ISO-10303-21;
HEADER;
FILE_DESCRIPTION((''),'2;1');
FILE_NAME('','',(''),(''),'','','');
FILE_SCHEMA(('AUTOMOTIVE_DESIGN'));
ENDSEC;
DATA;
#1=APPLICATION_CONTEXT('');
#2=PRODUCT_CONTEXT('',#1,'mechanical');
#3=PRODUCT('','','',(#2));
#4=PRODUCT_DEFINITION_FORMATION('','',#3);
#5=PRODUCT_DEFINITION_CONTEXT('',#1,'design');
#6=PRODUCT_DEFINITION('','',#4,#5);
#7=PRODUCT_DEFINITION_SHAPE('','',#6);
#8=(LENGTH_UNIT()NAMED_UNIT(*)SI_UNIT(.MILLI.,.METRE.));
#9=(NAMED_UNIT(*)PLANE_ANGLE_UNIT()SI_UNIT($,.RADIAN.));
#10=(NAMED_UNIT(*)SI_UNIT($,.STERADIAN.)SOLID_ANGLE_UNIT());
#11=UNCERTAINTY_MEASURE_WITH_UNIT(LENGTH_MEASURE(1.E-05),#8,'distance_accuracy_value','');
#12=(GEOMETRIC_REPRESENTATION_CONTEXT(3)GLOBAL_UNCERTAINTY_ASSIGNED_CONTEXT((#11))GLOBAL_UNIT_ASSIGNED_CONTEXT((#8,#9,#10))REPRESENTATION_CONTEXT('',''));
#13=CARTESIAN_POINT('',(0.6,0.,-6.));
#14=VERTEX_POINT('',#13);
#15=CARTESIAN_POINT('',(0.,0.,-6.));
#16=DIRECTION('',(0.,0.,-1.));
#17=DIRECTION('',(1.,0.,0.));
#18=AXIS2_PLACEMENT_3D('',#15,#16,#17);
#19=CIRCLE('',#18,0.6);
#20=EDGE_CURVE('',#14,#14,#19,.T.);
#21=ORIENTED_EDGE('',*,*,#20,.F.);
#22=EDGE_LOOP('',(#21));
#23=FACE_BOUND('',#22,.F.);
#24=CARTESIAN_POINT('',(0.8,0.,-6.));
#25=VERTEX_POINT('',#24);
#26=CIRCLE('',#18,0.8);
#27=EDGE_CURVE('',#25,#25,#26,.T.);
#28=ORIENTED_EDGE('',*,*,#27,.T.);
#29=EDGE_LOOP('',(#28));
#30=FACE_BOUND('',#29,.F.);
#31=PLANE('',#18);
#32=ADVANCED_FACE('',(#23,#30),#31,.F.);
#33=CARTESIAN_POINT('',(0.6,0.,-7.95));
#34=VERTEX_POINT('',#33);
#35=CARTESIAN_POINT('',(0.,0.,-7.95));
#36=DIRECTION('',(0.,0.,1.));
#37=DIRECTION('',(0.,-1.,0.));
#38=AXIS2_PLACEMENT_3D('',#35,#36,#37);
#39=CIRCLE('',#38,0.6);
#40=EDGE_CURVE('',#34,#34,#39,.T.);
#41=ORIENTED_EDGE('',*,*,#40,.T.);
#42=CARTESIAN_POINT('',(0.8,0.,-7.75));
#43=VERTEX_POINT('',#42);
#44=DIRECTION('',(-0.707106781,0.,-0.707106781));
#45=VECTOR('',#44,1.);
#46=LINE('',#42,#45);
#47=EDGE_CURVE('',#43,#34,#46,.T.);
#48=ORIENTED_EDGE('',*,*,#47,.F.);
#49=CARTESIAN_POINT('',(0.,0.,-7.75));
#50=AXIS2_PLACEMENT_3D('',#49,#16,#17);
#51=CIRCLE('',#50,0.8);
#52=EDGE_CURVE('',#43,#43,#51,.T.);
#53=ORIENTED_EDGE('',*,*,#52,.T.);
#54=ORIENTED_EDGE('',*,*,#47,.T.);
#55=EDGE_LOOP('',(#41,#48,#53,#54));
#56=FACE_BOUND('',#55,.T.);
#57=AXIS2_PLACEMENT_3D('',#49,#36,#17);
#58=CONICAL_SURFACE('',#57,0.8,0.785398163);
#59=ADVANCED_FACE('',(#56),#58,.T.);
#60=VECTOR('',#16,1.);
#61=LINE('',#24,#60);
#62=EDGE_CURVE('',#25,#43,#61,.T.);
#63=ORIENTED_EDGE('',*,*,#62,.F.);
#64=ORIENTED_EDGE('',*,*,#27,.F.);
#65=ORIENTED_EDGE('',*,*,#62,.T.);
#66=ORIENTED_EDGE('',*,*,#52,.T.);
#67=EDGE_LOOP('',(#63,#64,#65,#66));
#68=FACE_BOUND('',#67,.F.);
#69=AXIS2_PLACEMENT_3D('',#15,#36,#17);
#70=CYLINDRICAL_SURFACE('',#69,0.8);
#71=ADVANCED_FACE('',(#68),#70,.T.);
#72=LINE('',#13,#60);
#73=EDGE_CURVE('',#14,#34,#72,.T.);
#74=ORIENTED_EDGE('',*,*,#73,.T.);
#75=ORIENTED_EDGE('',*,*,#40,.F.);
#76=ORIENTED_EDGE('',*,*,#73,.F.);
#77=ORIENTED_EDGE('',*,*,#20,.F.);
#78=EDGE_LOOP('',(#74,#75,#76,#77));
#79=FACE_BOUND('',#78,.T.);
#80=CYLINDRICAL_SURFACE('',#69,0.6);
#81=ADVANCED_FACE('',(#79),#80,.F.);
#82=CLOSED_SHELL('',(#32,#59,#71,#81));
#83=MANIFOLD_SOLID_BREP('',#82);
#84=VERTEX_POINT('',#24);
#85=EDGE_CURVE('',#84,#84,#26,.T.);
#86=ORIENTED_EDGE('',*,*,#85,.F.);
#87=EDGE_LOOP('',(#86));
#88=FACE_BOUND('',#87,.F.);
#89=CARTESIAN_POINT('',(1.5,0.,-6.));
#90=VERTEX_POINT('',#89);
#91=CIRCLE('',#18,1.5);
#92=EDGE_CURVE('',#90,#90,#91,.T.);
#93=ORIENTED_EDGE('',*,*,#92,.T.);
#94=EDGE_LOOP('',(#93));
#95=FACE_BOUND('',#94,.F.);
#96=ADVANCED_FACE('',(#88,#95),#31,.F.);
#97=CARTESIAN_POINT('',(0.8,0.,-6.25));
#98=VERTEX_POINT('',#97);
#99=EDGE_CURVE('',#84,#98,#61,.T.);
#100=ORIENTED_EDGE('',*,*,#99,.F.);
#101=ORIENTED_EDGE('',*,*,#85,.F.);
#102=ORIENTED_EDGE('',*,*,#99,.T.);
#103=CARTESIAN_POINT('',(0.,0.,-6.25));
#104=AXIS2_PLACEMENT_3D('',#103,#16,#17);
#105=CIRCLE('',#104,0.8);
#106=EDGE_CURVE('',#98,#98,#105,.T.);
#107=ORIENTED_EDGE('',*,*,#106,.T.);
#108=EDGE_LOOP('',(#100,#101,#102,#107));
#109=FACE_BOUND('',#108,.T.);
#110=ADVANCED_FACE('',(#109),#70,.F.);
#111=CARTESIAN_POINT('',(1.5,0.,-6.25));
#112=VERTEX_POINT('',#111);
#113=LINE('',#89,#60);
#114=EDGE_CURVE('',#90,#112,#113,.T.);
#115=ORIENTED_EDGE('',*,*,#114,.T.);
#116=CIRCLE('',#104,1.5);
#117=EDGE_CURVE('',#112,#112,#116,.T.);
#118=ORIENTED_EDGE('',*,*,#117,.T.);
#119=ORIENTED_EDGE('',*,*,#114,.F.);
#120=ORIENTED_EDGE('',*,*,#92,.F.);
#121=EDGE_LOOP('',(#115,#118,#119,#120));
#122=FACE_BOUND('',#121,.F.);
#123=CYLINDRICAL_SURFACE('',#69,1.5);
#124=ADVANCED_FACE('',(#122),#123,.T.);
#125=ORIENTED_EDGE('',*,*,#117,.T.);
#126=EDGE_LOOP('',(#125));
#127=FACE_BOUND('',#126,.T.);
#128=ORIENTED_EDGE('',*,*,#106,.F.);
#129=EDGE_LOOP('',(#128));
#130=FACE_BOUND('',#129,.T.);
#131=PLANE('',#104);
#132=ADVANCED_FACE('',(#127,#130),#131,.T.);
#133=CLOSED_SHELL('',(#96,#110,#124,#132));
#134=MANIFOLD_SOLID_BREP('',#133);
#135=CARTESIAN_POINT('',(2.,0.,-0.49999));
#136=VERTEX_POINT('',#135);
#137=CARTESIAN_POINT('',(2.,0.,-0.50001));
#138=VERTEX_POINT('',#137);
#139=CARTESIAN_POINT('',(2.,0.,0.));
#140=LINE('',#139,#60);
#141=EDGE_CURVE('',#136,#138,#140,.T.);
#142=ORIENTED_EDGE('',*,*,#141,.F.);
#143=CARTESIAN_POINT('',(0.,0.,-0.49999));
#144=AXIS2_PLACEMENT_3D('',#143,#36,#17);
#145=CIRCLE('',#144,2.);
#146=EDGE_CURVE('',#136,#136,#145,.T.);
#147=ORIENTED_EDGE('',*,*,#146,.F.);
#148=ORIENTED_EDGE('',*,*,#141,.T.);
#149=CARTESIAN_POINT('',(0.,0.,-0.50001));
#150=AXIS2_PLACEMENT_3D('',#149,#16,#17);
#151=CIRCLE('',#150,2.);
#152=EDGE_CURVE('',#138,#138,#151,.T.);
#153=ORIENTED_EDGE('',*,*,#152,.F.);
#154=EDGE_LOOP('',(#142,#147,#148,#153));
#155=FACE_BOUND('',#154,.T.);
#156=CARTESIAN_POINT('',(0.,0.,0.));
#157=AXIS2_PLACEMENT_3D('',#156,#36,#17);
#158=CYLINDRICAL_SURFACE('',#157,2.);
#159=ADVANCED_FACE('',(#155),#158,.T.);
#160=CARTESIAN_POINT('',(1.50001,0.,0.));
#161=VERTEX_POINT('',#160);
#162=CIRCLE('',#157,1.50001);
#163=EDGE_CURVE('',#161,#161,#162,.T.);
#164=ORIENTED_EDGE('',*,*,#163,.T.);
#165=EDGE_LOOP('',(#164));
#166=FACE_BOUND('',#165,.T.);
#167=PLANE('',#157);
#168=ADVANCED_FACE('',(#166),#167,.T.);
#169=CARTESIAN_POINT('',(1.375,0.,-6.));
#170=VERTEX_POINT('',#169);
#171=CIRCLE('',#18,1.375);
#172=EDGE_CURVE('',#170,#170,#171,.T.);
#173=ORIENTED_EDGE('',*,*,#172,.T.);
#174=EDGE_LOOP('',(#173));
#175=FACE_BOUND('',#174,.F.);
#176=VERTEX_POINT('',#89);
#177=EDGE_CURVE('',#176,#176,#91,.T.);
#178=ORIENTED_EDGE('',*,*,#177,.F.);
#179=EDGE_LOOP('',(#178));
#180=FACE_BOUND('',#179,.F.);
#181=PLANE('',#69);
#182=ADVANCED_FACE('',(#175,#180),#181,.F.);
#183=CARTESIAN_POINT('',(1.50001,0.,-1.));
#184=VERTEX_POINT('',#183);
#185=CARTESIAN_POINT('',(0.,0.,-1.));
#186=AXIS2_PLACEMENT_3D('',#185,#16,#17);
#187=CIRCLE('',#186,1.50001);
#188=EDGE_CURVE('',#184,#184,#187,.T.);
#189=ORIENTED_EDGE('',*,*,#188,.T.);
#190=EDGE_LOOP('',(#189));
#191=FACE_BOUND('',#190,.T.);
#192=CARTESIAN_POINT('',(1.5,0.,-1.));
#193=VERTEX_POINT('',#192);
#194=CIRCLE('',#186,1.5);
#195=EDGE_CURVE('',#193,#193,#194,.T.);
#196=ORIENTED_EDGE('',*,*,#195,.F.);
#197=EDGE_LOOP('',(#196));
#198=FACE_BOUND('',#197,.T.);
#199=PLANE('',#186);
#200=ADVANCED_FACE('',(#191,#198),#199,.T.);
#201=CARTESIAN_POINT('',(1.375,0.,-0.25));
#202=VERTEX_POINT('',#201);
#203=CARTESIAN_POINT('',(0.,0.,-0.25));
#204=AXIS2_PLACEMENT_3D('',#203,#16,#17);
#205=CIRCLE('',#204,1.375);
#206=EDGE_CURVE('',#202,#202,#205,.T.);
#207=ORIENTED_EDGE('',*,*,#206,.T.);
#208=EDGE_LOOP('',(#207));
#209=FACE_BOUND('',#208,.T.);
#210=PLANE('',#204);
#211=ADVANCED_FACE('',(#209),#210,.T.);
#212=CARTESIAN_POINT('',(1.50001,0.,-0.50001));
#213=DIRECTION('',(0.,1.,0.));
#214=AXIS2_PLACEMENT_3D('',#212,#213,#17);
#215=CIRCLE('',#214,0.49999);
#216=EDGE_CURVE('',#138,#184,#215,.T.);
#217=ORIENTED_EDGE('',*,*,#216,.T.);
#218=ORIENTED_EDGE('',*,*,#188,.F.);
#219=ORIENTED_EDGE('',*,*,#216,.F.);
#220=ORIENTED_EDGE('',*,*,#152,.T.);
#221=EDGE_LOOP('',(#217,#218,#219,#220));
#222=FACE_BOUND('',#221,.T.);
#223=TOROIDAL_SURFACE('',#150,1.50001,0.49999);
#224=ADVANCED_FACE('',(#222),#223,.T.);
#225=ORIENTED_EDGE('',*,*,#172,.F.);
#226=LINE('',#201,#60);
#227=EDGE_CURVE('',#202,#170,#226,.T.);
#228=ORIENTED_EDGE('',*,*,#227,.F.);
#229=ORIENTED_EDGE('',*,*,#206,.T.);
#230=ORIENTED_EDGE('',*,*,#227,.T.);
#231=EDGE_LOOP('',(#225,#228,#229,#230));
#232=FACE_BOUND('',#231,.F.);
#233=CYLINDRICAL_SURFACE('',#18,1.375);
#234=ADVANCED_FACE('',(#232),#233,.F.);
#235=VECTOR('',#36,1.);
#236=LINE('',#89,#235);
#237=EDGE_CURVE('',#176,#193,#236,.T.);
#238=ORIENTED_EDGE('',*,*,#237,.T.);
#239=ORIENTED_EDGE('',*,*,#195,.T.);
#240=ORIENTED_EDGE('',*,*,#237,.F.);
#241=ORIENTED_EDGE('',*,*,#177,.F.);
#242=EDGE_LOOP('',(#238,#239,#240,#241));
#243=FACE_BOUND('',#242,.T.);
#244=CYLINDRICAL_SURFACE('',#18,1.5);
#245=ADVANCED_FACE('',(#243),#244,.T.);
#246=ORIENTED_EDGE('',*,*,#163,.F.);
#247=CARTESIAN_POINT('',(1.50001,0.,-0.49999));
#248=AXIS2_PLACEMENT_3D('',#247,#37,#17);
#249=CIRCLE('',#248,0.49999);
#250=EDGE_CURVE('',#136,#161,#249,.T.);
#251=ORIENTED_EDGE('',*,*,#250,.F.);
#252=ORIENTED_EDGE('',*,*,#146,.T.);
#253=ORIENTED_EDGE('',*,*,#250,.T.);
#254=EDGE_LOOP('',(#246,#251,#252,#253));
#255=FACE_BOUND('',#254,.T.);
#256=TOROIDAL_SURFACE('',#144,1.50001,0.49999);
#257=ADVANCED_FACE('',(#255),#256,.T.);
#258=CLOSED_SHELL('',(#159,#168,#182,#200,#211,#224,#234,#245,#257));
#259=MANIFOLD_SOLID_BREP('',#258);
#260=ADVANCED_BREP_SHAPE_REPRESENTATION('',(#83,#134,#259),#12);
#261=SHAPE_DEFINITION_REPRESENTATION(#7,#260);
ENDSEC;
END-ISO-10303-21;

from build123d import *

# Parameters (mm, degrees)
F0_R     = 2
F1_DEPTH = 6
F2_R     = 2
F2_R_2   = 1.5
F2_R_3   = 1.375
F2_R_4   = 0.8
F3_DEPTH = 5
F4_R     = 0.49999
F5_DEPTH = 0.25
F2_R_5   = 0.6
F6_DEPTH = 2
F7_DEPTH = 5.75


# Not quite as in the source:
# - a fillet or chamfer that OpenCascade refuses, or shapes differently, is made with other operations: its cross-section is extruded or revolved along the edge and cut away or added
# - a fillet or chamfer is up to 0.001 mm smaller than in the source, because OpenCascade refuses the exact size


with BuildPart() as f1:
    # F0 (on Top) → F1 (new body)
    with BuildSketch(Plane.XY):
        Circle(F0_R)
    extrude(amount=-F1_DEPTH)

    # F2 (on face) → F3 (cut)
    with BuildSketch(Plane(origin=(0, 0, -6), x_dir=(1, 0, 0), z_dir=(0, 0, -1))):
        Circle(F2_R)
        Circle(F2_R_2, mode=Mode.SUBTRACT)
        Circle(F2_R_3)
        Circle(F2_R_4, mode=Mode.SUBTRACT)
    extrude(amount=-F3_DEPTH, mode=Mode.SUBTRACT)

    # F4 (radius 0.5 in the source; OpenCascade refuses exactly that, so slightly less here)
    f4_edges = [f1.edges().sort_by_distance(p)[0] for p in [
        (-2, 0, 0),
        (-2, 0, -1),
    ]]
    fillet(f4_edges, radius=F4_R)

    # F2 (on face) → F7 (cut)
    with BuildSketch(Plane(origin=(0, 0, -6), x_dir=(1, 0, 0), z_dir=(0, 0, -1))):
        Circle(F2_R_3)
        Circle(F2_R_4, mode=Mode.SUBTRACT)
        Circle(F2_R_4)
        Circle(F2_R_5, mode=Mode.SUBTRACT)
        Circle(F2_R_5)
    extrude(amount=-F7_DEPTH, mode=Mode.SUBTRACT)


with BuildPart() as f5:
    # F2 (on face) → F5 (new body)
    with BuildSketch(Plane(origin=(0, 0, -6), x_dir=(1, 0, 0), z_dir=(0, 0, -1))):
        Circle(F2_R_2)
        Circle(F2_R_3, mode=Mode.SUBTRACT)
        Circle(F2_R_3)
        Circle(F2_R_4, mode=Mode.SUBTRACT)
    extrude(amount=F5_DEPTH)


with BuildPart() as f6:
    # F2 (on face) → F6 (new body)
    with BuildSketch(Plane(origin=(0, 0, -6), x_dir=(1, 0, 0), z_dir=(0, 0, -1))):
        Circle(F2_R_4)
        Circle(F2_R_5, mode=Mode.SUBTRACT)
    extrude(amount=F6_DEPTH)

    # F8: chamfer of 0.25 on 1 edges, made by hand

    # F8_s1 → F8_t2 (revolve, cut)
    with BuildSketch(Plane.XZ):
        Polygon((0.8, -7.75), (0.55, -8), (0.8, -8), align=None)
    revolve(axis=Axis((0, 0, -8), (0, 0, -1)), mode=Mode.SUBTRACT)


solid = Compound([f1.part, f5.part, f6.part])
